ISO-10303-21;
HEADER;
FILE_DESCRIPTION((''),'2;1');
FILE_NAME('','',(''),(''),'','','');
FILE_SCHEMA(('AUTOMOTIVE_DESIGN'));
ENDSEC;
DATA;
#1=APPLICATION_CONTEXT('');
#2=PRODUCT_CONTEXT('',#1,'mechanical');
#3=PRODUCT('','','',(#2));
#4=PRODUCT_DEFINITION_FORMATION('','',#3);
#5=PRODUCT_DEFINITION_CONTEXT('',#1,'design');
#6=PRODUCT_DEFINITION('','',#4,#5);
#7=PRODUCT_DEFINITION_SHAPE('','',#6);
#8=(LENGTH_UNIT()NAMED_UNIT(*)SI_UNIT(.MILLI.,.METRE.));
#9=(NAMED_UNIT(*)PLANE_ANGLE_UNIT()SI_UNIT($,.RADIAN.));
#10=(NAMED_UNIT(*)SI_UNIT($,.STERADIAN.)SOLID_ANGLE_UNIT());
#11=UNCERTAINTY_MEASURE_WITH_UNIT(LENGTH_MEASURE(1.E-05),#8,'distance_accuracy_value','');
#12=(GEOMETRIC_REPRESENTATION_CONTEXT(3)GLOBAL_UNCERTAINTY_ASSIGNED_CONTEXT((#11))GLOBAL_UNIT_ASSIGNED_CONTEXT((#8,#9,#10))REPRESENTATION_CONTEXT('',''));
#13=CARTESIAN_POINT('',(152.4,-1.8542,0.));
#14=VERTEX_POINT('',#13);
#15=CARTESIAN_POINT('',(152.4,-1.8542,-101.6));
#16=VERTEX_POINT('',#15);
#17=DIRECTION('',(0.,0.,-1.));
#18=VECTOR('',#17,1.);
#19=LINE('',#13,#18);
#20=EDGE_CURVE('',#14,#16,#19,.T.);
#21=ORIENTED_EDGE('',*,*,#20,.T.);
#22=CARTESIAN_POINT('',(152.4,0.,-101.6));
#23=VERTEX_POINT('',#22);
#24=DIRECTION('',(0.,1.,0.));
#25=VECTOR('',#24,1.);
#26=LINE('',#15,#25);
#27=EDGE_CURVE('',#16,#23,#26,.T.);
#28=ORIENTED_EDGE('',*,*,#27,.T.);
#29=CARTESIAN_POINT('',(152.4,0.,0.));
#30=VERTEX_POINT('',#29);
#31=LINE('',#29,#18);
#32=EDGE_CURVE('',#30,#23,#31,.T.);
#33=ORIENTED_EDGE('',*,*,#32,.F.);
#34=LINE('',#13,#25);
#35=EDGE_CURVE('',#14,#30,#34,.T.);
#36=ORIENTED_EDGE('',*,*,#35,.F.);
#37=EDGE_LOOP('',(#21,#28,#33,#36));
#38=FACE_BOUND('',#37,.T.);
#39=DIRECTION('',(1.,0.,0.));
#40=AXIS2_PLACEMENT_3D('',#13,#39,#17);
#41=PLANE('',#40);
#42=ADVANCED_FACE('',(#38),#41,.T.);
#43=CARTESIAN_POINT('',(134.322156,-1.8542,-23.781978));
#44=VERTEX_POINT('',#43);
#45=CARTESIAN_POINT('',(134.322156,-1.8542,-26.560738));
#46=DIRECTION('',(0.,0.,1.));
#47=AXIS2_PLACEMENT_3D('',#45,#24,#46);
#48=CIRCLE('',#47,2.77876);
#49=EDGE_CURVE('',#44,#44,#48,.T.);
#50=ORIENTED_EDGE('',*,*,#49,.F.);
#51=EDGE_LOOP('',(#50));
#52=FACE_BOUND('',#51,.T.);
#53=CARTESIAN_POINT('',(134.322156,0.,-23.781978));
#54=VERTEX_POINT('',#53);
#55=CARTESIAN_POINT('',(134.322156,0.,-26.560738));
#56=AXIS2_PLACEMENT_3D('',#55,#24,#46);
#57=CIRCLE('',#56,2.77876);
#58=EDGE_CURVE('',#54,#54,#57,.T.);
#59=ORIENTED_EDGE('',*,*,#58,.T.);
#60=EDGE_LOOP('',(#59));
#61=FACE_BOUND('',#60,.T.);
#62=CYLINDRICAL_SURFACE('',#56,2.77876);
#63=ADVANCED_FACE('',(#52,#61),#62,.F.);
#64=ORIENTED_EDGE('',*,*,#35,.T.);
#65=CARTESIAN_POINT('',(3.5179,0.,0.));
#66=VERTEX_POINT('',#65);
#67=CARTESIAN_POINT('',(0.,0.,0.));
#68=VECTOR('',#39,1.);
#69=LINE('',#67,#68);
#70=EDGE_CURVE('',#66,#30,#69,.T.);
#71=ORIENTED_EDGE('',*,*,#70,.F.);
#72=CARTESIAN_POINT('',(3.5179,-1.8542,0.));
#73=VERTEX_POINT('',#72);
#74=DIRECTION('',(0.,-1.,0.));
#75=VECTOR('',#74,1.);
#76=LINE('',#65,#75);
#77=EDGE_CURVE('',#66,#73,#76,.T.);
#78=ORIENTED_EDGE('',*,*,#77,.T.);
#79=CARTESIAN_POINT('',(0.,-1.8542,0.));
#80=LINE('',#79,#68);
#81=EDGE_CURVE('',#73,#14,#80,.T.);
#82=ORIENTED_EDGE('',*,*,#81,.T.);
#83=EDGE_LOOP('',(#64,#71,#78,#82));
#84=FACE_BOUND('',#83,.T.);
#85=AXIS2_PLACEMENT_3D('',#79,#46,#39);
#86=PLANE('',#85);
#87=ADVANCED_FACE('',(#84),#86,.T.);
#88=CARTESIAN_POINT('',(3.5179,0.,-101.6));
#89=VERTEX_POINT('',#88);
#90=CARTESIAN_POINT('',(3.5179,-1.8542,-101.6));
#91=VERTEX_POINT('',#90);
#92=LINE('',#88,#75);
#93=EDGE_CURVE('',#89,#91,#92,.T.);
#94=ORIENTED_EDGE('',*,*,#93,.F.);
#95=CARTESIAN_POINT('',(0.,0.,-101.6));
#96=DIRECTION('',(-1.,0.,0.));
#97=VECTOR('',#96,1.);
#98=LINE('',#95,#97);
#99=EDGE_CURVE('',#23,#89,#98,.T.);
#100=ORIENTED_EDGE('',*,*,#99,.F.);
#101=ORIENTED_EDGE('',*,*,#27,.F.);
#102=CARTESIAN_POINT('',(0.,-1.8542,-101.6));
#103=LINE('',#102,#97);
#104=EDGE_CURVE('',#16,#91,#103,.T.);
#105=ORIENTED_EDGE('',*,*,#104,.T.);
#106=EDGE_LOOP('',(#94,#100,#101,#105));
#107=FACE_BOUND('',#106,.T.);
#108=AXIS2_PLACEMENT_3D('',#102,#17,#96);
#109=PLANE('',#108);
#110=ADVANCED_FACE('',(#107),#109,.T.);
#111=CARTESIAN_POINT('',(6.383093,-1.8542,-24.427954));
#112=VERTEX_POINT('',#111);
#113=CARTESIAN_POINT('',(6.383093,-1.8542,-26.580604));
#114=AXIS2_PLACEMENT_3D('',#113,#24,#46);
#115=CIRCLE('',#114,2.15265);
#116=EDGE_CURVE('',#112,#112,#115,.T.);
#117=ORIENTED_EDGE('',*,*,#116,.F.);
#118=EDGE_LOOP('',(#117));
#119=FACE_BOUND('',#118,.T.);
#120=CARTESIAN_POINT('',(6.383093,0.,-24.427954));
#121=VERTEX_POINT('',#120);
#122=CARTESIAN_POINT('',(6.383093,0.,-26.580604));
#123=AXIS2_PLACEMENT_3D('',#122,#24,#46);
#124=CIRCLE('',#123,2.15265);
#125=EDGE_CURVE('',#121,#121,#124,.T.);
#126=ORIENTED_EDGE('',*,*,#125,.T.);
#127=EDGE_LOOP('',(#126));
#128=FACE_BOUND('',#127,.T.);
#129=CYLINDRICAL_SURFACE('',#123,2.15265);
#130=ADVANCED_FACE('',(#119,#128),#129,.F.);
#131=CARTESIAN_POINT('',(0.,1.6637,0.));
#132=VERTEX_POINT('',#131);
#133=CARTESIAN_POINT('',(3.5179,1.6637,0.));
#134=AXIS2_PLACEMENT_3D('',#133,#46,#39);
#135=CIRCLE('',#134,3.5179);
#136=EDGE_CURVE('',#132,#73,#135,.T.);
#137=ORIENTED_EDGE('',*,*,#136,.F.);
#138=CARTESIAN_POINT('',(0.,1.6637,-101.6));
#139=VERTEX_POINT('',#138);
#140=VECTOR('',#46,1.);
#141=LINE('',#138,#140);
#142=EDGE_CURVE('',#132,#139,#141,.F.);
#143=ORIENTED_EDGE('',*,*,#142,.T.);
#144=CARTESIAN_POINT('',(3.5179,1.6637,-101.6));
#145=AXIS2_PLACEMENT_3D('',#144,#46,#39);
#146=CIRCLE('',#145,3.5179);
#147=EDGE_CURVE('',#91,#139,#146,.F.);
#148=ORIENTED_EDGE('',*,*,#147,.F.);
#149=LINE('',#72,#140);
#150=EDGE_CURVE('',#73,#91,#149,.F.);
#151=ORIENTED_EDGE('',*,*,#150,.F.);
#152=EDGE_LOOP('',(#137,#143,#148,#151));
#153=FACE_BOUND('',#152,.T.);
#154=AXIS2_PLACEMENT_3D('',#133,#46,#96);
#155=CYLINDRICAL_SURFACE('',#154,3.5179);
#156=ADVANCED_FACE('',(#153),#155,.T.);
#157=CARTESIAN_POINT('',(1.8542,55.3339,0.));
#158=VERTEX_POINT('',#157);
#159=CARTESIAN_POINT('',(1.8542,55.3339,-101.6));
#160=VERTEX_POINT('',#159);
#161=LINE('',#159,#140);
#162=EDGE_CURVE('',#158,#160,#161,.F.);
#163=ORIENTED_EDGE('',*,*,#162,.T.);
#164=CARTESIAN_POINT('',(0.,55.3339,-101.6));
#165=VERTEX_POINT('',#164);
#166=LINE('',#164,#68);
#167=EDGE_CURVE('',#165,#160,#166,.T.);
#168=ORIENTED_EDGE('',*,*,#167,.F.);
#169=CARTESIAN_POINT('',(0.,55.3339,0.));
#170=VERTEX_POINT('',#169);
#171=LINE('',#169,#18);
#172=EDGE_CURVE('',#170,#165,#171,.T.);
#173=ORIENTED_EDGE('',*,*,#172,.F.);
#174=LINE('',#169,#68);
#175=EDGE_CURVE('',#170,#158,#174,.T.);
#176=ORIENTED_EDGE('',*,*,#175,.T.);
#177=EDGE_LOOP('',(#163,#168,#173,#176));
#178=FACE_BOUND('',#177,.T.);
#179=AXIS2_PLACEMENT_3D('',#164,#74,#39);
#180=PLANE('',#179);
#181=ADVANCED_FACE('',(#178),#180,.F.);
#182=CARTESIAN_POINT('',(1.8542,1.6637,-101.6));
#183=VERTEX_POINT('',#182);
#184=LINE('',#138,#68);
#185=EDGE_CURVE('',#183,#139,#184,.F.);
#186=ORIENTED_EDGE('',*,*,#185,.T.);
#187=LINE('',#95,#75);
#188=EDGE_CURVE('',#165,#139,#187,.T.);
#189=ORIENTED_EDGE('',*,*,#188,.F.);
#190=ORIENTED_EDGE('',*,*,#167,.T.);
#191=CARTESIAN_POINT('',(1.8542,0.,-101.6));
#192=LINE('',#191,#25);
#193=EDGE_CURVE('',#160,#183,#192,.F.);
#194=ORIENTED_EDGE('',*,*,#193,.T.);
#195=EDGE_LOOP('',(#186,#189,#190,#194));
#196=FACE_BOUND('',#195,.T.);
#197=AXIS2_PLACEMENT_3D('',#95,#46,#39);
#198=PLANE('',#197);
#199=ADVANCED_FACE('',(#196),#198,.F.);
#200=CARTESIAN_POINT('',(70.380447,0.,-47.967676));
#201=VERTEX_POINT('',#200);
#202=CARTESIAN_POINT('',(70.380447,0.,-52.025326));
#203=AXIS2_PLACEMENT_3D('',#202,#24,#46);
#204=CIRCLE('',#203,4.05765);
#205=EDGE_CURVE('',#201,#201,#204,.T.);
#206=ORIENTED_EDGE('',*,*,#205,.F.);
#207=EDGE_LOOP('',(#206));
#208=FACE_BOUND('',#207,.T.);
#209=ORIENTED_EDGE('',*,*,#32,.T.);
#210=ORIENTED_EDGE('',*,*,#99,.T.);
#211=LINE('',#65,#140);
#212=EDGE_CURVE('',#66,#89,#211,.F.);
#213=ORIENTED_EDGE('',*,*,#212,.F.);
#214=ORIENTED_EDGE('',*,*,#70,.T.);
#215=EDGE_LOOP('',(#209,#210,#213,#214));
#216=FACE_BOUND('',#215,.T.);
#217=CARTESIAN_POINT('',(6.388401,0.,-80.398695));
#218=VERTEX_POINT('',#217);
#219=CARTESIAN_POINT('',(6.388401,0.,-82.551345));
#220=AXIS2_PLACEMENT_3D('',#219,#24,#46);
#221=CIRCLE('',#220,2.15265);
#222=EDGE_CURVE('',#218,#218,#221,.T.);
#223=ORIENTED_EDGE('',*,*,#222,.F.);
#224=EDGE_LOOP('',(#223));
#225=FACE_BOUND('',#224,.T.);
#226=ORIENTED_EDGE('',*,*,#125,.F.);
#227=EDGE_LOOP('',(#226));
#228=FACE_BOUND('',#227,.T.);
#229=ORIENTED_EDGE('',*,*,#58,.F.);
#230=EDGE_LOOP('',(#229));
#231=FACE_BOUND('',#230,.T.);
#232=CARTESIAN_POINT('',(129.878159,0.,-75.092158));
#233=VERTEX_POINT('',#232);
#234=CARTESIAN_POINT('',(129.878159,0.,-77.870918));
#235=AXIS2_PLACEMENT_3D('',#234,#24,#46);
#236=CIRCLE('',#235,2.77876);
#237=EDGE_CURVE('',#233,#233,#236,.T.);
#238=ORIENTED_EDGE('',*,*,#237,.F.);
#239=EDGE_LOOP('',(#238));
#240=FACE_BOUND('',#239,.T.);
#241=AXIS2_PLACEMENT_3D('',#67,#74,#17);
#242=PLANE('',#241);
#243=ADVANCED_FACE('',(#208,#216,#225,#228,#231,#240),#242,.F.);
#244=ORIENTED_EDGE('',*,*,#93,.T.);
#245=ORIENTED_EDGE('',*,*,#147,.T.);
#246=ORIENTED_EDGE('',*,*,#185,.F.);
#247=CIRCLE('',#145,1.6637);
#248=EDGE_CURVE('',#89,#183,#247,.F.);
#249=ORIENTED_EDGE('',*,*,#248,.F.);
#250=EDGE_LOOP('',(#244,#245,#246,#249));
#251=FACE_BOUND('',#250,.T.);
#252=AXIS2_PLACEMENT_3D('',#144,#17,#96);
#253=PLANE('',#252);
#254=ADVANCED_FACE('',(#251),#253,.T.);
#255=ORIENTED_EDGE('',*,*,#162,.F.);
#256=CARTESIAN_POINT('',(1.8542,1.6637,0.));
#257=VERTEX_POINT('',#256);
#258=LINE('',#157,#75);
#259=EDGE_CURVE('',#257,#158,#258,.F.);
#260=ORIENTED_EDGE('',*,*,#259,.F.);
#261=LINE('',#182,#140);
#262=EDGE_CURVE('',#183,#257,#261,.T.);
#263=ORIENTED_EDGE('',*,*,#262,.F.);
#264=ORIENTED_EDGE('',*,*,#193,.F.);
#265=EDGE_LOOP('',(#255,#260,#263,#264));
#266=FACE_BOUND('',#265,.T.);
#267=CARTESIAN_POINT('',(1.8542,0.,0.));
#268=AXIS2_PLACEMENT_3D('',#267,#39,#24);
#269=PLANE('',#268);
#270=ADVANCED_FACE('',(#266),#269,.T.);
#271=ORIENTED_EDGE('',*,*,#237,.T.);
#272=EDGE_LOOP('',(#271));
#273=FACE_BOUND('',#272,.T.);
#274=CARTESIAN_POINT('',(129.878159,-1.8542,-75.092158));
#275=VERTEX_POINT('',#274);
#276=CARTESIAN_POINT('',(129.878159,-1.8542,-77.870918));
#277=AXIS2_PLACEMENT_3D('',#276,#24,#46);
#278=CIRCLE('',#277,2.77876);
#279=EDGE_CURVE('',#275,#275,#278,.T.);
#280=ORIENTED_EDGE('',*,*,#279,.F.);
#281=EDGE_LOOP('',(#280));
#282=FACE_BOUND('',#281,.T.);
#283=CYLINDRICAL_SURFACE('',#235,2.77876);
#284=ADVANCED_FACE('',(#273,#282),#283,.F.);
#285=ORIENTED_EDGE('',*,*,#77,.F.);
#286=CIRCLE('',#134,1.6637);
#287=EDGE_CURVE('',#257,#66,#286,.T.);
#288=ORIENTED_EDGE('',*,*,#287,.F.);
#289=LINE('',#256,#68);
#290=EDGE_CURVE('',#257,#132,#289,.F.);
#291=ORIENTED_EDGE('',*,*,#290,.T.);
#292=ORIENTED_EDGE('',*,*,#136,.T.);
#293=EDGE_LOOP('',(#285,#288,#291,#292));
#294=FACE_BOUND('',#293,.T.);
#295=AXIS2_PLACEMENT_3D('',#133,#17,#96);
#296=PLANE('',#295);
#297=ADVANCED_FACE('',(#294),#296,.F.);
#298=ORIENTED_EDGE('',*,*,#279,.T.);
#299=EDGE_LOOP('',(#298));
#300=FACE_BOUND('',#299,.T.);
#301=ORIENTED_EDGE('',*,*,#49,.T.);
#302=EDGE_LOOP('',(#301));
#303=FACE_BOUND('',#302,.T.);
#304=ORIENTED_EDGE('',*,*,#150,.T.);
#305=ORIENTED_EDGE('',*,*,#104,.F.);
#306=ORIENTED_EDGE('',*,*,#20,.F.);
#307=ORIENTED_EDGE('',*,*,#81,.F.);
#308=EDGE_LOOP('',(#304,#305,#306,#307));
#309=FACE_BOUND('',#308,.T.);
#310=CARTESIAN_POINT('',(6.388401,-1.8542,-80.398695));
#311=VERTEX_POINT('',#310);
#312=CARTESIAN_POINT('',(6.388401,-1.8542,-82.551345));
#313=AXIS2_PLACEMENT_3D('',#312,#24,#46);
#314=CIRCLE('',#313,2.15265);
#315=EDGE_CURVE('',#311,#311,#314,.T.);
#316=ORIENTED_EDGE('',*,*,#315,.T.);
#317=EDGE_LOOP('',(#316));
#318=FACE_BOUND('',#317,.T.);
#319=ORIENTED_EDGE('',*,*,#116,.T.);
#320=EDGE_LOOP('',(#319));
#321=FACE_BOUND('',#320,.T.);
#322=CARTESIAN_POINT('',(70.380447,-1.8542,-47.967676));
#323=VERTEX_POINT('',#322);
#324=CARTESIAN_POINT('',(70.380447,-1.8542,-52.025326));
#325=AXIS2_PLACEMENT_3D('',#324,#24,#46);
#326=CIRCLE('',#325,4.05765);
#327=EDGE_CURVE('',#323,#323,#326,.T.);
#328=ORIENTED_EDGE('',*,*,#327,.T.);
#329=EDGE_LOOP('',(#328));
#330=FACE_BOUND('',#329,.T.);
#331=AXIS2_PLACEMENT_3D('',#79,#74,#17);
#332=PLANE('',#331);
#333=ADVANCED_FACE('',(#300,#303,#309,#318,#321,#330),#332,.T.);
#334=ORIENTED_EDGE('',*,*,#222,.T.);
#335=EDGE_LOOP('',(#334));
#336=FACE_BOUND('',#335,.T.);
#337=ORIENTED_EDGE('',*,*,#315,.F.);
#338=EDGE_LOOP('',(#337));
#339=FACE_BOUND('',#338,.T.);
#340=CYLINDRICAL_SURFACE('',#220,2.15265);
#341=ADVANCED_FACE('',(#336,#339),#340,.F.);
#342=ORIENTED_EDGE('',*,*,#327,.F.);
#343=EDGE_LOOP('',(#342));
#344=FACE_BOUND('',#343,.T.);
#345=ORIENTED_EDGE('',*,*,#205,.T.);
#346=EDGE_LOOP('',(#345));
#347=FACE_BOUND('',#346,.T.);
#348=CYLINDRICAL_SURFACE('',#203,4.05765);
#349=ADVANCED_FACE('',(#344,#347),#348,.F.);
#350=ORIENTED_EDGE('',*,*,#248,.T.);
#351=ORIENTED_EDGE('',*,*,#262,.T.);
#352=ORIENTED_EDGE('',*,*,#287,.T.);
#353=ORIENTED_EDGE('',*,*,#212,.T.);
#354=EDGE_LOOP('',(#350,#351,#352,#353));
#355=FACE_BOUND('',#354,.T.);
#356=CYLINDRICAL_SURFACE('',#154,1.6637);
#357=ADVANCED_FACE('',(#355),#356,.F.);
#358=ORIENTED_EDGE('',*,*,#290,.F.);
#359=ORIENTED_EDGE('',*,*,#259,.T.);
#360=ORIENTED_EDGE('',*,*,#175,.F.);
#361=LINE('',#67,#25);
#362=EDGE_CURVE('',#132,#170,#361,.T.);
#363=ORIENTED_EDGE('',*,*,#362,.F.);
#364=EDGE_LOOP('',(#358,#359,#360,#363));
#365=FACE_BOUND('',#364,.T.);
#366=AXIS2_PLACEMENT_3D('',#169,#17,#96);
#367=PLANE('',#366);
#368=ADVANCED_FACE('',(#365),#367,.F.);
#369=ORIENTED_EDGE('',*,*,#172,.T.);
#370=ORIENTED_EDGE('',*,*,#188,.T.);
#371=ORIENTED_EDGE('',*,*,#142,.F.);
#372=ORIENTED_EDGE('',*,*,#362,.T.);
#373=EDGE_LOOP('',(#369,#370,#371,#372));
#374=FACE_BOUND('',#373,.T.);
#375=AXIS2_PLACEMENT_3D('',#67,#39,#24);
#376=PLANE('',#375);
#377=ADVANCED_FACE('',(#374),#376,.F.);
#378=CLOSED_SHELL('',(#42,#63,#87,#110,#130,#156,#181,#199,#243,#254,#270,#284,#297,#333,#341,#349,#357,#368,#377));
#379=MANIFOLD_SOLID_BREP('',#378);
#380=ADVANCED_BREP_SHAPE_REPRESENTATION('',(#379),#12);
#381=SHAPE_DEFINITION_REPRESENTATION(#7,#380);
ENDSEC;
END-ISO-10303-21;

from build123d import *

# Parameters (mm, degrees)
SKETCH1_W                    = 152.4
SKETCH1_H                    = 101.6
BASE_FLANGE1_DEPTH           = 1.8542
EDGE_FLANGE1_STRIP_W         = 10.7442
EDGE_FLANGE1_STRIP_H         = 1.8542
EDGE_FLANGE1_STRIP_CUT_DEPTH = 101.6
EDGE_FLANGE1_DEPTH           = 101.6
F_1_4_20_TAPPED_HOLE1_D      = 5.55752
F_3_8_16_TAPPED_HOLE1_D      = 8.1153
F_10_32_TAPPED_HOLE1_D       = 4.3053


# Sheet-metal steps are written as plain solids
with BuildPart() as part:
    # Sketch1 → Base-Flange1 (new body)
    with BuildSketch(Plane(origin=(0, 0, 0), x_dir=(1, 0, 0), z_dir=(0, 1, 0))):
        with Locations((76.2, 50.8)):
            Rectangle(SKETCH1_W, SKETCH1_H)
    extrude(amount=-BASE_FLANGE1_DEPTH)

    # Edge-Flange1 strip (across the edge) → Edge-Flange1 strip cut (cut)
    with BuildSketch(Plane.XY.offset(-101.6)):
        with Locations((-1.8542, -0.9271)):
            Rectangle(EDGE_FLANGE1_STRIP_W, EDGE_FLANGE1_STRIP_H)
    extrude(amount=EDGE_FLANGE1_STRIP_CUT_DEPTH, mode=Mode.SUBTRACT)

    # Edge-Flange1 section (across the edge) → Edge-Flange1 (add)
    with BuildSketch(Plane.XY.offset(-101.6)):
        with BuildLine():
            Line((0, 1.6637), (0, 55.3339))
            Line((0, 55.3339), (1.8542, 55.3339))
            Line((1.8542, 55.3339), (1.8542, 1.6637))
            ThreePointArc((1.8542, 1.6637), (2.341486448, 0.487286448), (3.5179, 0))
            Line((3.5179, 0), (3.5179, -1.8542))
            ThreePointArc((3.5179, -1.8542), (1.030369054, -0.823830946), (0, 1.6637))
        make_face()
    extrude(amount=EDGE_FLANGE1_DEPTH)

    # 1/4-20 Tapped Hole1 (through all)
    with Locations(Plane(origin=(0, 0, 0), x_dir=(1, 0, 0), z_dir=(0, 1, 0))):
        with Locations((129.87815907, 77.870917938), (134.322155935, 26.560738372)):
            Hole(F_1_4_20_TAPPED_HOLE1_D / 2)

    # 3/8-16 Tapped Hole1 (through all)
    with Locations(Plane(origin=(0, 0, 0), x_dir=(1, 0, 0), z_dir=(0, 1, 0))):
        with Locations((70.38044711, 52.025325842)):
            Hole(F_3_8_16_TAPPED_HOLE1_D / 2)

    # #10-32 Tapped Hole1 (through all)
    with Locations(Plane(origin=(6.383092755, 0, -26.580603581), x_dir=(0, 0, 1), z_dir=(0, 1, 0))):
        with Locations((0, 0), (-55.970741812, 0.005307766)):
            Hole(F_10_32_TAPPED_HOLE1_D / 2)


solid = part.part
